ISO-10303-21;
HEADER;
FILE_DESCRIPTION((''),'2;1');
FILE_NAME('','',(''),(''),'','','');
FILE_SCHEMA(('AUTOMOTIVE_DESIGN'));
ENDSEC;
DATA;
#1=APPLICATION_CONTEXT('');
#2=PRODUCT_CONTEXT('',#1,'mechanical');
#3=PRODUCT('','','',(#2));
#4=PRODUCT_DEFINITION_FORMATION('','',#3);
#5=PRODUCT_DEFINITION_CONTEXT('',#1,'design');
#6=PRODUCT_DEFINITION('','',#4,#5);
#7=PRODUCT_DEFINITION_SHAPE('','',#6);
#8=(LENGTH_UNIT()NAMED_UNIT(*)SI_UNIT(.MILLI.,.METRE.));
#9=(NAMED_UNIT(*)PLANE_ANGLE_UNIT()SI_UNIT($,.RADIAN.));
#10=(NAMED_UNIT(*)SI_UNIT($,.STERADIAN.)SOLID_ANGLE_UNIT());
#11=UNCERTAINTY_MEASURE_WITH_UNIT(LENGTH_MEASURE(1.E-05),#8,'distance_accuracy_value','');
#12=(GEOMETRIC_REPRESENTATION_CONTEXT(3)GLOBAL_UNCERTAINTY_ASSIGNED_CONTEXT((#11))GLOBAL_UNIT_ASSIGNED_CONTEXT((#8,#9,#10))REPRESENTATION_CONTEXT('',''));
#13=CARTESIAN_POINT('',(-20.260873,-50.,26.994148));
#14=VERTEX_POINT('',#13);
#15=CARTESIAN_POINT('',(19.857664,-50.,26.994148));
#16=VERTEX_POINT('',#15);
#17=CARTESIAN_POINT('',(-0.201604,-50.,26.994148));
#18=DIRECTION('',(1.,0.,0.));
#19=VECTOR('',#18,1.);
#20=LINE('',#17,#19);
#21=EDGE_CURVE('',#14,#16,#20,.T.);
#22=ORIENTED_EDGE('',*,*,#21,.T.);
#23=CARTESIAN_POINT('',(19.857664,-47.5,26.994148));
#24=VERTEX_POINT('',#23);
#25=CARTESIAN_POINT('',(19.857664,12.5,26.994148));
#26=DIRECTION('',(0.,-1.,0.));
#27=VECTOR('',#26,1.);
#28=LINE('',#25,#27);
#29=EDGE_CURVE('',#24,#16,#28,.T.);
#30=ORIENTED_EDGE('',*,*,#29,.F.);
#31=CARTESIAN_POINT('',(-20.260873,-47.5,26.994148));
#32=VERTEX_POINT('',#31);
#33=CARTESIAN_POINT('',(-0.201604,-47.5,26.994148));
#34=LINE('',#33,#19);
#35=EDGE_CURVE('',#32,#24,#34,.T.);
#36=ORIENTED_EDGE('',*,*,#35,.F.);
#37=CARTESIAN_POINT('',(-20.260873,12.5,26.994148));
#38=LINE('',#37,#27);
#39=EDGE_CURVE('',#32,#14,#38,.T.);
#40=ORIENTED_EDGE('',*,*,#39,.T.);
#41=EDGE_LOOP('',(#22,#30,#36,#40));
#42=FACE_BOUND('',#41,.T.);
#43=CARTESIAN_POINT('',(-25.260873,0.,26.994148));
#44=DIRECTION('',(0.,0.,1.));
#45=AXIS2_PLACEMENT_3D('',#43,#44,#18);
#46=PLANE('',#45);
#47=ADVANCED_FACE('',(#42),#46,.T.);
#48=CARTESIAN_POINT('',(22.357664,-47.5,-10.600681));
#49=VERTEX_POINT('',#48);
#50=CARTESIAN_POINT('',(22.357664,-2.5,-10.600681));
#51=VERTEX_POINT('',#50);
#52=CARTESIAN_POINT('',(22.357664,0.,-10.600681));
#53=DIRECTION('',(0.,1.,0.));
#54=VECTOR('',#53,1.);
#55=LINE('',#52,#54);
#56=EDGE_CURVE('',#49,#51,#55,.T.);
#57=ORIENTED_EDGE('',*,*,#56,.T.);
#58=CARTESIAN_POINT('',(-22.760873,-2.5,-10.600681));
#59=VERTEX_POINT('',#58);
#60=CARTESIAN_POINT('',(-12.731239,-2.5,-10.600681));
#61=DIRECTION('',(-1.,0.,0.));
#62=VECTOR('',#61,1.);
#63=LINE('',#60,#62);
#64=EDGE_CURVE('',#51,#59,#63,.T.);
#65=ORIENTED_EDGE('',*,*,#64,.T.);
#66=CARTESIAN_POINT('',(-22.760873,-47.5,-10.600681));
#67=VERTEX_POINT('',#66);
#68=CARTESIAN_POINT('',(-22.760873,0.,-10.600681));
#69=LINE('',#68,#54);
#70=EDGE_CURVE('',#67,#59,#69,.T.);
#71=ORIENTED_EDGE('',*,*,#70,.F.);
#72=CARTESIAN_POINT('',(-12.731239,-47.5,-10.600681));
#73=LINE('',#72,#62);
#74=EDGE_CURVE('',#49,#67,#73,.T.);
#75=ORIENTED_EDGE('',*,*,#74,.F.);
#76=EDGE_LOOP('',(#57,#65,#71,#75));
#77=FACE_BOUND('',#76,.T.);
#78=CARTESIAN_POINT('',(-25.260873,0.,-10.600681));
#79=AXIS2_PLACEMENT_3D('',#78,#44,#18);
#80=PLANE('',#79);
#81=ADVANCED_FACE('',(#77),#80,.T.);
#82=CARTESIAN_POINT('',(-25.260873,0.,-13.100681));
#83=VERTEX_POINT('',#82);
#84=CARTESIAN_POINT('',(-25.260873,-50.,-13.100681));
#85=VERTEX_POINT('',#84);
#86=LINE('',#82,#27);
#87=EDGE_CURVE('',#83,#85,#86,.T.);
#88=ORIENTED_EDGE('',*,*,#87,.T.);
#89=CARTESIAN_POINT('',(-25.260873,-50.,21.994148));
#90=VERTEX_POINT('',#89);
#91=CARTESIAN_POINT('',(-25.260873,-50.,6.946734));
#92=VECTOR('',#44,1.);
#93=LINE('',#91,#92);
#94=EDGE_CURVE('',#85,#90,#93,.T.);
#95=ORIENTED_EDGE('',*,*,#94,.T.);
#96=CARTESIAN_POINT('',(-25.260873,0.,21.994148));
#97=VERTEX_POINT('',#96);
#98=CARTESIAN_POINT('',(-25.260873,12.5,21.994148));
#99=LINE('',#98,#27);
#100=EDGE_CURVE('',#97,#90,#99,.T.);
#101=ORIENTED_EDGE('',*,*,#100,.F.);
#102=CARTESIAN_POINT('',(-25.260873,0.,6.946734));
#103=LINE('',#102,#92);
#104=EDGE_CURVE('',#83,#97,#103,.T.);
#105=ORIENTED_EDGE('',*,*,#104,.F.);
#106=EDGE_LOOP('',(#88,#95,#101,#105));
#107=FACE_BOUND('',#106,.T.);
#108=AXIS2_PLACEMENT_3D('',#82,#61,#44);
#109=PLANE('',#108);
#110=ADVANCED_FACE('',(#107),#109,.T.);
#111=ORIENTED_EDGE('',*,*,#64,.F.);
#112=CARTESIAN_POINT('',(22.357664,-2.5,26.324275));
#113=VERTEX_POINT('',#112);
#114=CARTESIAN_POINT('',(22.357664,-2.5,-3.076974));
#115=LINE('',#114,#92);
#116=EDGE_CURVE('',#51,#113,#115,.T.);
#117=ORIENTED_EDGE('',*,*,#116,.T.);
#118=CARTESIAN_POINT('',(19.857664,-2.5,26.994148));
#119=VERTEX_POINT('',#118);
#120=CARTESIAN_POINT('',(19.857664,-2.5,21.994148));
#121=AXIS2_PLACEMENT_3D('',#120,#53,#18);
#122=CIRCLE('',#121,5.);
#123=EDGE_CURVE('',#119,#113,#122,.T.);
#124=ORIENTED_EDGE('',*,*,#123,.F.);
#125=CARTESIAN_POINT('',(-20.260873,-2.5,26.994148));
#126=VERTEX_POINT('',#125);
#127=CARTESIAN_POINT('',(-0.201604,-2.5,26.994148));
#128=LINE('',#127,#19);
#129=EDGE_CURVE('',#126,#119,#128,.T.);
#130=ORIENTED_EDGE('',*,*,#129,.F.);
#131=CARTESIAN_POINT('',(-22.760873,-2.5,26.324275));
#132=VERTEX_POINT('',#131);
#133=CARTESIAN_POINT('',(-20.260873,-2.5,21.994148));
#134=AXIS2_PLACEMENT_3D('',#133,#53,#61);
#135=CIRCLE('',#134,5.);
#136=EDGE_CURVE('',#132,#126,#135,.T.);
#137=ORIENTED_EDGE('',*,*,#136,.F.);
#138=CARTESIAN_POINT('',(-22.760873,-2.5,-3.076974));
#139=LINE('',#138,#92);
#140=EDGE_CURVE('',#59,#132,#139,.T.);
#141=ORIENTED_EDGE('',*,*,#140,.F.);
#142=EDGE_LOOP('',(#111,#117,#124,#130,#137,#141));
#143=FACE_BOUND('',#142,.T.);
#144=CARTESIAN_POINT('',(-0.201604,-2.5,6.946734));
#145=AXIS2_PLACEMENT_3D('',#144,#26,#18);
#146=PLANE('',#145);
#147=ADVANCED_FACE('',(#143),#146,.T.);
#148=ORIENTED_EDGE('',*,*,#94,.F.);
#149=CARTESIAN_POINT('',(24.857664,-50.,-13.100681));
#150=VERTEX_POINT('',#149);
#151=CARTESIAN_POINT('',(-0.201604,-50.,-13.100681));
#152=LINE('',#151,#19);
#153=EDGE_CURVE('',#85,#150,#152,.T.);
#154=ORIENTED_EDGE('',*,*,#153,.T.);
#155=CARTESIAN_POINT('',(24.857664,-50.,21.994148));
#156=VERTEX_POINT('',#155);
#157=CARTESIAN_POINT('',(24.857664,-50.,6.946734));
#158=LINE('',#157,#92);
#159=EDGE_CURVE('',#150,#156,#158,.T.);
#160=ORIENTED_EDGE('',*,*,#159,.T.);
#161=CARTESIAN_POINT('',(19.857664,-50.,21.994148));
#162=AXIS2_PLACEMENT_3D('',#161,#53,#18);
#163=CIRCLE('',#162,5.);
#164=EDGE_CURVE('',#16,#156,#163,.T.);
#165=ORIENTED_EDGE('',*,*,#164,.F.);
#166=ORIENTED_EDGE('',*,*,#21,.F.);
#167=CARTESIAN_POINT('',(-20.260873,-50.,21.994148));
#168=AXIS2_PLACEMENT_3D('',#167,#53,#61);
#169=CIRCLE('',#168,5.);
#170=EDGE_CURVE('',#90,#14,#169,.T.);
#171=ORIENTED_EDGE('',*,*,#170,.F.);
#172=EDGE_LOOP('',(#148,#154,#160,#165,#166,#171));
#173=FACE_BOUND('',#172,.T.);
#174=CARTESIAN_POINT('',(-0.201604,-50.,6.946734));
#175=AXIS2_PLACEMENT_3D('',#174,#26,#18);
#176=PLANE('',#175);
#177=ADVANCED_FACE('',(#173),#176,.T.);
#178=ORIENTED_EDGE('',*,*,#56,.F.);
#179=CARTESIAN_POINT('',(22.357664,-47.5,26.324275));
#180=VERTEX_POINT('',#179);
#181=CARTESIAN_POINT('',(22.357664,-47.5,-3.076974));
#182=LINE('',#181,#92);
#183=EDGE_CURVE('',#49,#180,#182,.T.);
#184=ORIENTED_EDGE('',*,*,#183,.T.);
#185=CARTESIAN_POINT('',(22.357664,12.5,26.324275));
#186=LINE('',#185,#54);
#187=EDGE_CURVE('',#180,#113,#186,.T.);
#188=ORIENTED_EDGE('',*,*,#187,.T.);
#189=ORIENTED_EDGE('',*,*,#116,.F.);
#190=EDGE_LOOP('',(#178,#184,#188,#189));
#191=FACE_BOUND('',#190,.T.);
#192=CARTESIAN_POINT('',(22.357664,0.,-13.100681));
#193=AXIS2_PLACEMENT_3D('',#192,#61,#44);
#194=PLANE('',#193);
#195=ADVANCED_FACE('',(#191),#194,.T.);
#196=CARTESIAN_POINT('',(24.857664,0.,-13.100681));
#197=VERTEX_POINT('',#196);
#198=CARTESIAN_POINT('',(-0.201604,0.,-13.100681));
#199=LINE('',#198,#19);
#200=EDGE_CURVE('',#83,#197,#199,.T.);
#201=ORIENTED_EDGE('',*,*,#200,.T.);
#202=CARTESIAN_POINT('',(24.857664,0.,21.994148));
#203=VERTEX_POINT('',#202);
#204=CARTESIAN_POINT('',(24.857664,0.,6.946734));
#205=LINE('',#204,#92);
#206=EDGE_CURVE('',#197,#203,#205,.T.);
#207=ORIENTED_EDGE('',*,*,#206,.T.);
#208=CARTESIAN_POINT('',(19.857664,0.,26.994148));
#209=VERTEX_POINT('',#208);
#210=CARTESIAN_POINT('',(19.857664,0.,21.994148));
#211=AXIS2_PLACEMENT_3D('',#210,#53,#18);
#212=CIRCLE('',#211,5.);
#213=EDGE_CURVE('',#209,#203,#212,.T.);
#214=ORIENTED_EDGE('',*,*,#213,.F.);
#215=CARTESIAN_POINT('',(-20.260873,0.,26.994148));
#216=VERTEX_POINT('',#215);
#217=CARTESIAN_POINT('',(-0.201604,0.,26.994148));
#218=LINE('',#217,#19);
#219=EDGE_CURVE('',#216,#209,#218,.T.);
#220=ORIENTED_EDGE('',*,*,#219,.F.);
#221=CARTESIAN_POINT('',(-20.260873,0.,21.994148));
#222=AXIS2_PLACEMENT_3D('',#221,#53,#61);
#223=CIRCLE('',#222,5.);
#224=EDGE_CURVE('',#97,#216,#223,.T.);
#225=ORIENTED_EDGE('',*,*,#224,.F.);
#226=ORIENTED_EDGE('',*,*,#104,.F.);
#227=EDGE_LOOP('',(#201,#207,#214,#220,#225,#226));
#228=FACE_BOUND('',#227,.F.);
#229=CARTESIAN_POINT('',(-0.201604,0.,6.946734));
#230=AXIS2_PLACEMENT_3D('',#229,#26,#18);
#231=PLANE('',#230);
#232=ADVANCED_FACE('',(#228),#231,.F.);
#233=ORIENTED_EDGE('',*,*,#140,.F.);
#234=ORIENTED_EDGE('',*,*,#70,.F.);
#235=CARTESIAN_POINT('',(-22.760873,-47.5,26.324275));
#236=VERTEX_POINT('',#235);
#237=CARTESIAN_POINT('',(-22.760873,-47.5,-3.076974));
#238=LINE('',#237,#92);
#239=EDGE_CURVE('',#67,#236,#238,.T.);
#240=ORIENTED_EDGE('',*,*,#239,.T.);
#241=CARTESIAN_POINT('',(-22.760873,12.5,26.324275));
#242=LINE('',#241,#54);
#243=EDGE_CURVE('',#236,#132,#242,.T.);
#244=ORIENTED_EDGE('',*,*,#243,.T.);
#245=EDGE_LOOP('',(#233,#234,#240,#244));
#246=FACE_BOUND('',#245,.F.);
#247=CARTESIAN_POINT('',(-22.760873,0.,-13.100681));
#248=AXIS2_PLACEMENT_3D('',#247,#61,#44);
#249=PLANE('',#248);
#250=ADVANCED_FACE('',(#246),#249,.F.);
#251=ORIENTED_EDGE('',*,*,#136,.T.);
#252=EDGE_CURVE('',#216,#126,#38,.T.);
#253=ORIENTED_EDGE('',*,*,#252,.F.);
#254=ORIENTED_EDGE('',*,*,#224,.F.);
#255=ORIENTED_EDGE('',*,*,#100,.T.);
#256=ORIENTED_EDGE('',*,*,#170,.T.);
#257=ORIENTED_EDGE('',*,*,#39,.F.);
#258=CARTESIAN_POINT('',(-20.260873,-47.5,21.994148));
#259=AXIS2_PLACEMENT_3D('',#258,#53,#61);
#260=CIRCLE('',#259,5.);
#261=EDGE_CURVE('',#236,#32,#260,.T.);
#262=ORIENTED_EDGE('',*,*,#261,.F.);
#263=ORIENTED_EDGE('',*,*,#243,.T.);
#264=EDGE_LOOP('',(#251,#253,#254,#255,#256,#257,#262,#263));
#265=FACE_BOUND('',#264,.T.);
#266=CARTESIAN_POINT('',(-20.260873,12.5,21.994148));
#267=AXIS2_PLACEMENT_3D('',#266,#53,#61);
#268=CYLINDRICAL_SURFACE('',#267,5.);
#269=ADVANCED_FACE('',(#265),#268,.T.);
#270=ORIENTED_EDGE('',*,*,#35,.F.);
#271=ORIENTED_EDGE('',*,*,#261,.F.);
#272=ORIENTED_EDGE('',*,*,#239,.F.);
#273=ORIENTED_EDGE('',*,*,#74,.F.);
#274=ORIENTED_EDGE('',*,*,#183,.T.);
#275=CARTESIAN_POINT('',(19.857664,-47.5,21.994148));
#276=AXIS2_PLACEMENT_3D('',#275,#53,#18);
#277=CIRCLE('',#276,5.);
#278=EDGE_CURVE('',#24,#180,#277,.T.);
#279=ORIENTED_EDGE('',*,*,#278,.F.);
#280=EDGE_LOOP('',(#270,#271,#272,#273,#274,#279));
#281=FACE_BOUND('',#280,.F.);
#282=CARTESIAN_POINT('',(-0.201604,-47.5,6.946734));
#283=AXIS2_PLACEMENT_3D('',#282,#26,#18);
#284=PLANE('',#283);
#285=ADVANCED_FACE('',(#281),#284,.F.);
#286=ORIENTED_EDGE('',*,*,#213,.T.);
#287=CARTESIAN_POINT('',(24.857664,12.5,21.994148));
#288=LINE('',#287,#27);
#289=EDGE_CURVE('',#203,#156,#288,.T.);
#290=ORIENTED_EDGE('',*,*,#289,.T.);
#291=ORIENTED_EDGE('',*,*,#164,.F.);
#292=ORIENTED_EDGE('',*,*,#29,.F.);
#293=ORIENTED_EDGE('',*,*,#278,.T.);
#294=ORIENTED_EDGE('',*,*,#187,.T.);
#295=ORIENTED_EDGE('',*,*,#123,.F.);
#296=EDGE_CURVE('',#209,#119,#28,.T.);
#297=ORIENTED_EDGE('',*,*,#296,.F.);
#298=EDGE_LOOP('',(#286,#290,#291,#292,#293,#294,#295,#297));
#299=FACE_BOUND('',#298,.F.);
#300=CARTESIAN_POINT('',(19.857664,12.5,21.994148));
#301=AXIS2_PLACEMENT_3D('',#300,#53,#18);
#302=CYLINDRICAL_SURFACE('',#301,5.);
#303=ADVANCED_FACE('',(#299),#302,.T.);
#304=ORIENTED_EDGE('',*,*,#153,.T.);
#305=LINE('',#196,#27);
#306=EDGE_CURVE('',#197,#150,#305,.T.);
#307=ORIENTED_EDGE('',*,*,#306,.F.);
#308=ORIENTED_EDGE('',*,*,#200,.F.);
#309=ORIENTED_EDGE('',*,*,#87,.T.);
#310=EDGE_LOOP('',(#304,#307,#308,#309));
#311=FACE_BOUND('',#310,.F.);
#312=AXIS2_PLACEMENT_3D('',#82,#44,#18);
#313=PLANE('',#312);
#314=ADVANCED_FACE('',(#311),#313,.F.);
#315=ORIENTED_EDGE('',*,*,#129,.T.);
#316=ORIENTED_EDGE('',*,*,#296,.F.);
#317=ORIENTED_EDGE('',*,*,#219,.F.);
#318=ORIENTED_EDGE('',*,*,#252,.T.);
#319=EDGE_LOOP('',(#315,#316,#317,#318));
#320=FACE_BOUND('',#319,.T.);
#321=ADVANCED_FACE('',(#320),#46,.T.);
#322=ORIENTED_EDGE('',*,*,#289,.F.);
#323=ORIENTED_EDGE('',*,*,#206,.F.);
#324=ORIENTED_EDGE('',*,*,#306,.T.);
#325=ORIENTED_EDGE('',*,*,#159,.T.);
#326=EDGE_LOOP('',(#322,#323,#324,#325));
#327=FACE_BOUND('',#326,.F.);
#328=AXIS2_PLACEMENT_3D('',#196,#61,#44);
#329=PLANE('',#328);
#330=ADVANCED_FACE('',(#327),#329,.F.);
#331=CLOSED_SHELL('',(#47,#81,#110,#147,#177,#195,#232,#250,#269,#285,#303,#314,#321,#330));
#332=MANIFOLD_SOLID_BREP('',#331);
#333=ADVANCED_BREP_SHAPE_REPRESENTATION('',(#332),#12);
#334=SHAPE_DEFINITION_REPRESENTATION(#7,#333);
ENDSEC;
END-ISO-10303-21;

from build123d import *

# Parameters (mm, degrees)
F0_W        = 50.1185376197
F0_H        = 40.0948291644
F1_DEPTH    = 50
F2_T        = -2.5
F3_T1_DEPTH = 75
F4_T1_DEPTH = 75


# Not quite as in the source:
# - a fillet or chamfer that OpenCascade refuses, or shapes differently, is made with other operations: its cross-section is extruded or revolved along the edge and cut away or added


with BuildPart() as f1:
    # F0 (on Front) → F1 (new body)
    with BuildSketch(Plane.XZ):
        with Locations((-0.201604329, 6.9467336871)):
            Rectangle(F0_W, F0_H)
    extrude(amount=F1_DEPTH)

    # F2
    f2_openings = [f1.faces().sort_by_distance(p)[0] for p in [
        (-0.201604, -25, 26.994148),
    ]]
    offset(amount=F2_T, openings=f2_openings)

    # F3: fillet of radius 5 on 1 edges, made by hand

    # F3_s2 → F3_t1 (cut)
    with BuildSketch(Plane.XZ.offset(-12.5)):
        with BuildLine():
            ThreePointArc((24.8576644808, 21.9941482693), (23.3931983867, 25.5296821752), (19.8576644808, 26.9941482693))
            Line((19.8576644808, 26.9941482693), (24.8576644808, 26.9941482693))
            Line((24.8576644808, 26.9941482693), (24.8576644808, 21.9941482693))
        make_face()
    extrude(amount=F3_T1_DEPTH, mode=Mode.SUBTRACT)

    # F4: fillet of radius 5 on 1 edges, made by hand

    # F4_s2 → F4_t1 (cut)
    with BuildSketch(Plane.XZ.offset(-12.5)):
        with BuildLine():
            ThreePointArc((-25.2608731389, 21.9941482693), (-23.7964070448, 25.5296821752), (-20.2608731389, 26.9941482693))
            Line((-20.2608731389, 26.9941482693), (-25.2608731389, 26.9941482693))
            Line((-25.2608731389, 26.9941482693), (-25.2608731389, 21.9941482693))
        make_face()
    extrude(amount=F4_T1_DEPTH, mode=Mode.SUBTRACT)


solid = f1.part
